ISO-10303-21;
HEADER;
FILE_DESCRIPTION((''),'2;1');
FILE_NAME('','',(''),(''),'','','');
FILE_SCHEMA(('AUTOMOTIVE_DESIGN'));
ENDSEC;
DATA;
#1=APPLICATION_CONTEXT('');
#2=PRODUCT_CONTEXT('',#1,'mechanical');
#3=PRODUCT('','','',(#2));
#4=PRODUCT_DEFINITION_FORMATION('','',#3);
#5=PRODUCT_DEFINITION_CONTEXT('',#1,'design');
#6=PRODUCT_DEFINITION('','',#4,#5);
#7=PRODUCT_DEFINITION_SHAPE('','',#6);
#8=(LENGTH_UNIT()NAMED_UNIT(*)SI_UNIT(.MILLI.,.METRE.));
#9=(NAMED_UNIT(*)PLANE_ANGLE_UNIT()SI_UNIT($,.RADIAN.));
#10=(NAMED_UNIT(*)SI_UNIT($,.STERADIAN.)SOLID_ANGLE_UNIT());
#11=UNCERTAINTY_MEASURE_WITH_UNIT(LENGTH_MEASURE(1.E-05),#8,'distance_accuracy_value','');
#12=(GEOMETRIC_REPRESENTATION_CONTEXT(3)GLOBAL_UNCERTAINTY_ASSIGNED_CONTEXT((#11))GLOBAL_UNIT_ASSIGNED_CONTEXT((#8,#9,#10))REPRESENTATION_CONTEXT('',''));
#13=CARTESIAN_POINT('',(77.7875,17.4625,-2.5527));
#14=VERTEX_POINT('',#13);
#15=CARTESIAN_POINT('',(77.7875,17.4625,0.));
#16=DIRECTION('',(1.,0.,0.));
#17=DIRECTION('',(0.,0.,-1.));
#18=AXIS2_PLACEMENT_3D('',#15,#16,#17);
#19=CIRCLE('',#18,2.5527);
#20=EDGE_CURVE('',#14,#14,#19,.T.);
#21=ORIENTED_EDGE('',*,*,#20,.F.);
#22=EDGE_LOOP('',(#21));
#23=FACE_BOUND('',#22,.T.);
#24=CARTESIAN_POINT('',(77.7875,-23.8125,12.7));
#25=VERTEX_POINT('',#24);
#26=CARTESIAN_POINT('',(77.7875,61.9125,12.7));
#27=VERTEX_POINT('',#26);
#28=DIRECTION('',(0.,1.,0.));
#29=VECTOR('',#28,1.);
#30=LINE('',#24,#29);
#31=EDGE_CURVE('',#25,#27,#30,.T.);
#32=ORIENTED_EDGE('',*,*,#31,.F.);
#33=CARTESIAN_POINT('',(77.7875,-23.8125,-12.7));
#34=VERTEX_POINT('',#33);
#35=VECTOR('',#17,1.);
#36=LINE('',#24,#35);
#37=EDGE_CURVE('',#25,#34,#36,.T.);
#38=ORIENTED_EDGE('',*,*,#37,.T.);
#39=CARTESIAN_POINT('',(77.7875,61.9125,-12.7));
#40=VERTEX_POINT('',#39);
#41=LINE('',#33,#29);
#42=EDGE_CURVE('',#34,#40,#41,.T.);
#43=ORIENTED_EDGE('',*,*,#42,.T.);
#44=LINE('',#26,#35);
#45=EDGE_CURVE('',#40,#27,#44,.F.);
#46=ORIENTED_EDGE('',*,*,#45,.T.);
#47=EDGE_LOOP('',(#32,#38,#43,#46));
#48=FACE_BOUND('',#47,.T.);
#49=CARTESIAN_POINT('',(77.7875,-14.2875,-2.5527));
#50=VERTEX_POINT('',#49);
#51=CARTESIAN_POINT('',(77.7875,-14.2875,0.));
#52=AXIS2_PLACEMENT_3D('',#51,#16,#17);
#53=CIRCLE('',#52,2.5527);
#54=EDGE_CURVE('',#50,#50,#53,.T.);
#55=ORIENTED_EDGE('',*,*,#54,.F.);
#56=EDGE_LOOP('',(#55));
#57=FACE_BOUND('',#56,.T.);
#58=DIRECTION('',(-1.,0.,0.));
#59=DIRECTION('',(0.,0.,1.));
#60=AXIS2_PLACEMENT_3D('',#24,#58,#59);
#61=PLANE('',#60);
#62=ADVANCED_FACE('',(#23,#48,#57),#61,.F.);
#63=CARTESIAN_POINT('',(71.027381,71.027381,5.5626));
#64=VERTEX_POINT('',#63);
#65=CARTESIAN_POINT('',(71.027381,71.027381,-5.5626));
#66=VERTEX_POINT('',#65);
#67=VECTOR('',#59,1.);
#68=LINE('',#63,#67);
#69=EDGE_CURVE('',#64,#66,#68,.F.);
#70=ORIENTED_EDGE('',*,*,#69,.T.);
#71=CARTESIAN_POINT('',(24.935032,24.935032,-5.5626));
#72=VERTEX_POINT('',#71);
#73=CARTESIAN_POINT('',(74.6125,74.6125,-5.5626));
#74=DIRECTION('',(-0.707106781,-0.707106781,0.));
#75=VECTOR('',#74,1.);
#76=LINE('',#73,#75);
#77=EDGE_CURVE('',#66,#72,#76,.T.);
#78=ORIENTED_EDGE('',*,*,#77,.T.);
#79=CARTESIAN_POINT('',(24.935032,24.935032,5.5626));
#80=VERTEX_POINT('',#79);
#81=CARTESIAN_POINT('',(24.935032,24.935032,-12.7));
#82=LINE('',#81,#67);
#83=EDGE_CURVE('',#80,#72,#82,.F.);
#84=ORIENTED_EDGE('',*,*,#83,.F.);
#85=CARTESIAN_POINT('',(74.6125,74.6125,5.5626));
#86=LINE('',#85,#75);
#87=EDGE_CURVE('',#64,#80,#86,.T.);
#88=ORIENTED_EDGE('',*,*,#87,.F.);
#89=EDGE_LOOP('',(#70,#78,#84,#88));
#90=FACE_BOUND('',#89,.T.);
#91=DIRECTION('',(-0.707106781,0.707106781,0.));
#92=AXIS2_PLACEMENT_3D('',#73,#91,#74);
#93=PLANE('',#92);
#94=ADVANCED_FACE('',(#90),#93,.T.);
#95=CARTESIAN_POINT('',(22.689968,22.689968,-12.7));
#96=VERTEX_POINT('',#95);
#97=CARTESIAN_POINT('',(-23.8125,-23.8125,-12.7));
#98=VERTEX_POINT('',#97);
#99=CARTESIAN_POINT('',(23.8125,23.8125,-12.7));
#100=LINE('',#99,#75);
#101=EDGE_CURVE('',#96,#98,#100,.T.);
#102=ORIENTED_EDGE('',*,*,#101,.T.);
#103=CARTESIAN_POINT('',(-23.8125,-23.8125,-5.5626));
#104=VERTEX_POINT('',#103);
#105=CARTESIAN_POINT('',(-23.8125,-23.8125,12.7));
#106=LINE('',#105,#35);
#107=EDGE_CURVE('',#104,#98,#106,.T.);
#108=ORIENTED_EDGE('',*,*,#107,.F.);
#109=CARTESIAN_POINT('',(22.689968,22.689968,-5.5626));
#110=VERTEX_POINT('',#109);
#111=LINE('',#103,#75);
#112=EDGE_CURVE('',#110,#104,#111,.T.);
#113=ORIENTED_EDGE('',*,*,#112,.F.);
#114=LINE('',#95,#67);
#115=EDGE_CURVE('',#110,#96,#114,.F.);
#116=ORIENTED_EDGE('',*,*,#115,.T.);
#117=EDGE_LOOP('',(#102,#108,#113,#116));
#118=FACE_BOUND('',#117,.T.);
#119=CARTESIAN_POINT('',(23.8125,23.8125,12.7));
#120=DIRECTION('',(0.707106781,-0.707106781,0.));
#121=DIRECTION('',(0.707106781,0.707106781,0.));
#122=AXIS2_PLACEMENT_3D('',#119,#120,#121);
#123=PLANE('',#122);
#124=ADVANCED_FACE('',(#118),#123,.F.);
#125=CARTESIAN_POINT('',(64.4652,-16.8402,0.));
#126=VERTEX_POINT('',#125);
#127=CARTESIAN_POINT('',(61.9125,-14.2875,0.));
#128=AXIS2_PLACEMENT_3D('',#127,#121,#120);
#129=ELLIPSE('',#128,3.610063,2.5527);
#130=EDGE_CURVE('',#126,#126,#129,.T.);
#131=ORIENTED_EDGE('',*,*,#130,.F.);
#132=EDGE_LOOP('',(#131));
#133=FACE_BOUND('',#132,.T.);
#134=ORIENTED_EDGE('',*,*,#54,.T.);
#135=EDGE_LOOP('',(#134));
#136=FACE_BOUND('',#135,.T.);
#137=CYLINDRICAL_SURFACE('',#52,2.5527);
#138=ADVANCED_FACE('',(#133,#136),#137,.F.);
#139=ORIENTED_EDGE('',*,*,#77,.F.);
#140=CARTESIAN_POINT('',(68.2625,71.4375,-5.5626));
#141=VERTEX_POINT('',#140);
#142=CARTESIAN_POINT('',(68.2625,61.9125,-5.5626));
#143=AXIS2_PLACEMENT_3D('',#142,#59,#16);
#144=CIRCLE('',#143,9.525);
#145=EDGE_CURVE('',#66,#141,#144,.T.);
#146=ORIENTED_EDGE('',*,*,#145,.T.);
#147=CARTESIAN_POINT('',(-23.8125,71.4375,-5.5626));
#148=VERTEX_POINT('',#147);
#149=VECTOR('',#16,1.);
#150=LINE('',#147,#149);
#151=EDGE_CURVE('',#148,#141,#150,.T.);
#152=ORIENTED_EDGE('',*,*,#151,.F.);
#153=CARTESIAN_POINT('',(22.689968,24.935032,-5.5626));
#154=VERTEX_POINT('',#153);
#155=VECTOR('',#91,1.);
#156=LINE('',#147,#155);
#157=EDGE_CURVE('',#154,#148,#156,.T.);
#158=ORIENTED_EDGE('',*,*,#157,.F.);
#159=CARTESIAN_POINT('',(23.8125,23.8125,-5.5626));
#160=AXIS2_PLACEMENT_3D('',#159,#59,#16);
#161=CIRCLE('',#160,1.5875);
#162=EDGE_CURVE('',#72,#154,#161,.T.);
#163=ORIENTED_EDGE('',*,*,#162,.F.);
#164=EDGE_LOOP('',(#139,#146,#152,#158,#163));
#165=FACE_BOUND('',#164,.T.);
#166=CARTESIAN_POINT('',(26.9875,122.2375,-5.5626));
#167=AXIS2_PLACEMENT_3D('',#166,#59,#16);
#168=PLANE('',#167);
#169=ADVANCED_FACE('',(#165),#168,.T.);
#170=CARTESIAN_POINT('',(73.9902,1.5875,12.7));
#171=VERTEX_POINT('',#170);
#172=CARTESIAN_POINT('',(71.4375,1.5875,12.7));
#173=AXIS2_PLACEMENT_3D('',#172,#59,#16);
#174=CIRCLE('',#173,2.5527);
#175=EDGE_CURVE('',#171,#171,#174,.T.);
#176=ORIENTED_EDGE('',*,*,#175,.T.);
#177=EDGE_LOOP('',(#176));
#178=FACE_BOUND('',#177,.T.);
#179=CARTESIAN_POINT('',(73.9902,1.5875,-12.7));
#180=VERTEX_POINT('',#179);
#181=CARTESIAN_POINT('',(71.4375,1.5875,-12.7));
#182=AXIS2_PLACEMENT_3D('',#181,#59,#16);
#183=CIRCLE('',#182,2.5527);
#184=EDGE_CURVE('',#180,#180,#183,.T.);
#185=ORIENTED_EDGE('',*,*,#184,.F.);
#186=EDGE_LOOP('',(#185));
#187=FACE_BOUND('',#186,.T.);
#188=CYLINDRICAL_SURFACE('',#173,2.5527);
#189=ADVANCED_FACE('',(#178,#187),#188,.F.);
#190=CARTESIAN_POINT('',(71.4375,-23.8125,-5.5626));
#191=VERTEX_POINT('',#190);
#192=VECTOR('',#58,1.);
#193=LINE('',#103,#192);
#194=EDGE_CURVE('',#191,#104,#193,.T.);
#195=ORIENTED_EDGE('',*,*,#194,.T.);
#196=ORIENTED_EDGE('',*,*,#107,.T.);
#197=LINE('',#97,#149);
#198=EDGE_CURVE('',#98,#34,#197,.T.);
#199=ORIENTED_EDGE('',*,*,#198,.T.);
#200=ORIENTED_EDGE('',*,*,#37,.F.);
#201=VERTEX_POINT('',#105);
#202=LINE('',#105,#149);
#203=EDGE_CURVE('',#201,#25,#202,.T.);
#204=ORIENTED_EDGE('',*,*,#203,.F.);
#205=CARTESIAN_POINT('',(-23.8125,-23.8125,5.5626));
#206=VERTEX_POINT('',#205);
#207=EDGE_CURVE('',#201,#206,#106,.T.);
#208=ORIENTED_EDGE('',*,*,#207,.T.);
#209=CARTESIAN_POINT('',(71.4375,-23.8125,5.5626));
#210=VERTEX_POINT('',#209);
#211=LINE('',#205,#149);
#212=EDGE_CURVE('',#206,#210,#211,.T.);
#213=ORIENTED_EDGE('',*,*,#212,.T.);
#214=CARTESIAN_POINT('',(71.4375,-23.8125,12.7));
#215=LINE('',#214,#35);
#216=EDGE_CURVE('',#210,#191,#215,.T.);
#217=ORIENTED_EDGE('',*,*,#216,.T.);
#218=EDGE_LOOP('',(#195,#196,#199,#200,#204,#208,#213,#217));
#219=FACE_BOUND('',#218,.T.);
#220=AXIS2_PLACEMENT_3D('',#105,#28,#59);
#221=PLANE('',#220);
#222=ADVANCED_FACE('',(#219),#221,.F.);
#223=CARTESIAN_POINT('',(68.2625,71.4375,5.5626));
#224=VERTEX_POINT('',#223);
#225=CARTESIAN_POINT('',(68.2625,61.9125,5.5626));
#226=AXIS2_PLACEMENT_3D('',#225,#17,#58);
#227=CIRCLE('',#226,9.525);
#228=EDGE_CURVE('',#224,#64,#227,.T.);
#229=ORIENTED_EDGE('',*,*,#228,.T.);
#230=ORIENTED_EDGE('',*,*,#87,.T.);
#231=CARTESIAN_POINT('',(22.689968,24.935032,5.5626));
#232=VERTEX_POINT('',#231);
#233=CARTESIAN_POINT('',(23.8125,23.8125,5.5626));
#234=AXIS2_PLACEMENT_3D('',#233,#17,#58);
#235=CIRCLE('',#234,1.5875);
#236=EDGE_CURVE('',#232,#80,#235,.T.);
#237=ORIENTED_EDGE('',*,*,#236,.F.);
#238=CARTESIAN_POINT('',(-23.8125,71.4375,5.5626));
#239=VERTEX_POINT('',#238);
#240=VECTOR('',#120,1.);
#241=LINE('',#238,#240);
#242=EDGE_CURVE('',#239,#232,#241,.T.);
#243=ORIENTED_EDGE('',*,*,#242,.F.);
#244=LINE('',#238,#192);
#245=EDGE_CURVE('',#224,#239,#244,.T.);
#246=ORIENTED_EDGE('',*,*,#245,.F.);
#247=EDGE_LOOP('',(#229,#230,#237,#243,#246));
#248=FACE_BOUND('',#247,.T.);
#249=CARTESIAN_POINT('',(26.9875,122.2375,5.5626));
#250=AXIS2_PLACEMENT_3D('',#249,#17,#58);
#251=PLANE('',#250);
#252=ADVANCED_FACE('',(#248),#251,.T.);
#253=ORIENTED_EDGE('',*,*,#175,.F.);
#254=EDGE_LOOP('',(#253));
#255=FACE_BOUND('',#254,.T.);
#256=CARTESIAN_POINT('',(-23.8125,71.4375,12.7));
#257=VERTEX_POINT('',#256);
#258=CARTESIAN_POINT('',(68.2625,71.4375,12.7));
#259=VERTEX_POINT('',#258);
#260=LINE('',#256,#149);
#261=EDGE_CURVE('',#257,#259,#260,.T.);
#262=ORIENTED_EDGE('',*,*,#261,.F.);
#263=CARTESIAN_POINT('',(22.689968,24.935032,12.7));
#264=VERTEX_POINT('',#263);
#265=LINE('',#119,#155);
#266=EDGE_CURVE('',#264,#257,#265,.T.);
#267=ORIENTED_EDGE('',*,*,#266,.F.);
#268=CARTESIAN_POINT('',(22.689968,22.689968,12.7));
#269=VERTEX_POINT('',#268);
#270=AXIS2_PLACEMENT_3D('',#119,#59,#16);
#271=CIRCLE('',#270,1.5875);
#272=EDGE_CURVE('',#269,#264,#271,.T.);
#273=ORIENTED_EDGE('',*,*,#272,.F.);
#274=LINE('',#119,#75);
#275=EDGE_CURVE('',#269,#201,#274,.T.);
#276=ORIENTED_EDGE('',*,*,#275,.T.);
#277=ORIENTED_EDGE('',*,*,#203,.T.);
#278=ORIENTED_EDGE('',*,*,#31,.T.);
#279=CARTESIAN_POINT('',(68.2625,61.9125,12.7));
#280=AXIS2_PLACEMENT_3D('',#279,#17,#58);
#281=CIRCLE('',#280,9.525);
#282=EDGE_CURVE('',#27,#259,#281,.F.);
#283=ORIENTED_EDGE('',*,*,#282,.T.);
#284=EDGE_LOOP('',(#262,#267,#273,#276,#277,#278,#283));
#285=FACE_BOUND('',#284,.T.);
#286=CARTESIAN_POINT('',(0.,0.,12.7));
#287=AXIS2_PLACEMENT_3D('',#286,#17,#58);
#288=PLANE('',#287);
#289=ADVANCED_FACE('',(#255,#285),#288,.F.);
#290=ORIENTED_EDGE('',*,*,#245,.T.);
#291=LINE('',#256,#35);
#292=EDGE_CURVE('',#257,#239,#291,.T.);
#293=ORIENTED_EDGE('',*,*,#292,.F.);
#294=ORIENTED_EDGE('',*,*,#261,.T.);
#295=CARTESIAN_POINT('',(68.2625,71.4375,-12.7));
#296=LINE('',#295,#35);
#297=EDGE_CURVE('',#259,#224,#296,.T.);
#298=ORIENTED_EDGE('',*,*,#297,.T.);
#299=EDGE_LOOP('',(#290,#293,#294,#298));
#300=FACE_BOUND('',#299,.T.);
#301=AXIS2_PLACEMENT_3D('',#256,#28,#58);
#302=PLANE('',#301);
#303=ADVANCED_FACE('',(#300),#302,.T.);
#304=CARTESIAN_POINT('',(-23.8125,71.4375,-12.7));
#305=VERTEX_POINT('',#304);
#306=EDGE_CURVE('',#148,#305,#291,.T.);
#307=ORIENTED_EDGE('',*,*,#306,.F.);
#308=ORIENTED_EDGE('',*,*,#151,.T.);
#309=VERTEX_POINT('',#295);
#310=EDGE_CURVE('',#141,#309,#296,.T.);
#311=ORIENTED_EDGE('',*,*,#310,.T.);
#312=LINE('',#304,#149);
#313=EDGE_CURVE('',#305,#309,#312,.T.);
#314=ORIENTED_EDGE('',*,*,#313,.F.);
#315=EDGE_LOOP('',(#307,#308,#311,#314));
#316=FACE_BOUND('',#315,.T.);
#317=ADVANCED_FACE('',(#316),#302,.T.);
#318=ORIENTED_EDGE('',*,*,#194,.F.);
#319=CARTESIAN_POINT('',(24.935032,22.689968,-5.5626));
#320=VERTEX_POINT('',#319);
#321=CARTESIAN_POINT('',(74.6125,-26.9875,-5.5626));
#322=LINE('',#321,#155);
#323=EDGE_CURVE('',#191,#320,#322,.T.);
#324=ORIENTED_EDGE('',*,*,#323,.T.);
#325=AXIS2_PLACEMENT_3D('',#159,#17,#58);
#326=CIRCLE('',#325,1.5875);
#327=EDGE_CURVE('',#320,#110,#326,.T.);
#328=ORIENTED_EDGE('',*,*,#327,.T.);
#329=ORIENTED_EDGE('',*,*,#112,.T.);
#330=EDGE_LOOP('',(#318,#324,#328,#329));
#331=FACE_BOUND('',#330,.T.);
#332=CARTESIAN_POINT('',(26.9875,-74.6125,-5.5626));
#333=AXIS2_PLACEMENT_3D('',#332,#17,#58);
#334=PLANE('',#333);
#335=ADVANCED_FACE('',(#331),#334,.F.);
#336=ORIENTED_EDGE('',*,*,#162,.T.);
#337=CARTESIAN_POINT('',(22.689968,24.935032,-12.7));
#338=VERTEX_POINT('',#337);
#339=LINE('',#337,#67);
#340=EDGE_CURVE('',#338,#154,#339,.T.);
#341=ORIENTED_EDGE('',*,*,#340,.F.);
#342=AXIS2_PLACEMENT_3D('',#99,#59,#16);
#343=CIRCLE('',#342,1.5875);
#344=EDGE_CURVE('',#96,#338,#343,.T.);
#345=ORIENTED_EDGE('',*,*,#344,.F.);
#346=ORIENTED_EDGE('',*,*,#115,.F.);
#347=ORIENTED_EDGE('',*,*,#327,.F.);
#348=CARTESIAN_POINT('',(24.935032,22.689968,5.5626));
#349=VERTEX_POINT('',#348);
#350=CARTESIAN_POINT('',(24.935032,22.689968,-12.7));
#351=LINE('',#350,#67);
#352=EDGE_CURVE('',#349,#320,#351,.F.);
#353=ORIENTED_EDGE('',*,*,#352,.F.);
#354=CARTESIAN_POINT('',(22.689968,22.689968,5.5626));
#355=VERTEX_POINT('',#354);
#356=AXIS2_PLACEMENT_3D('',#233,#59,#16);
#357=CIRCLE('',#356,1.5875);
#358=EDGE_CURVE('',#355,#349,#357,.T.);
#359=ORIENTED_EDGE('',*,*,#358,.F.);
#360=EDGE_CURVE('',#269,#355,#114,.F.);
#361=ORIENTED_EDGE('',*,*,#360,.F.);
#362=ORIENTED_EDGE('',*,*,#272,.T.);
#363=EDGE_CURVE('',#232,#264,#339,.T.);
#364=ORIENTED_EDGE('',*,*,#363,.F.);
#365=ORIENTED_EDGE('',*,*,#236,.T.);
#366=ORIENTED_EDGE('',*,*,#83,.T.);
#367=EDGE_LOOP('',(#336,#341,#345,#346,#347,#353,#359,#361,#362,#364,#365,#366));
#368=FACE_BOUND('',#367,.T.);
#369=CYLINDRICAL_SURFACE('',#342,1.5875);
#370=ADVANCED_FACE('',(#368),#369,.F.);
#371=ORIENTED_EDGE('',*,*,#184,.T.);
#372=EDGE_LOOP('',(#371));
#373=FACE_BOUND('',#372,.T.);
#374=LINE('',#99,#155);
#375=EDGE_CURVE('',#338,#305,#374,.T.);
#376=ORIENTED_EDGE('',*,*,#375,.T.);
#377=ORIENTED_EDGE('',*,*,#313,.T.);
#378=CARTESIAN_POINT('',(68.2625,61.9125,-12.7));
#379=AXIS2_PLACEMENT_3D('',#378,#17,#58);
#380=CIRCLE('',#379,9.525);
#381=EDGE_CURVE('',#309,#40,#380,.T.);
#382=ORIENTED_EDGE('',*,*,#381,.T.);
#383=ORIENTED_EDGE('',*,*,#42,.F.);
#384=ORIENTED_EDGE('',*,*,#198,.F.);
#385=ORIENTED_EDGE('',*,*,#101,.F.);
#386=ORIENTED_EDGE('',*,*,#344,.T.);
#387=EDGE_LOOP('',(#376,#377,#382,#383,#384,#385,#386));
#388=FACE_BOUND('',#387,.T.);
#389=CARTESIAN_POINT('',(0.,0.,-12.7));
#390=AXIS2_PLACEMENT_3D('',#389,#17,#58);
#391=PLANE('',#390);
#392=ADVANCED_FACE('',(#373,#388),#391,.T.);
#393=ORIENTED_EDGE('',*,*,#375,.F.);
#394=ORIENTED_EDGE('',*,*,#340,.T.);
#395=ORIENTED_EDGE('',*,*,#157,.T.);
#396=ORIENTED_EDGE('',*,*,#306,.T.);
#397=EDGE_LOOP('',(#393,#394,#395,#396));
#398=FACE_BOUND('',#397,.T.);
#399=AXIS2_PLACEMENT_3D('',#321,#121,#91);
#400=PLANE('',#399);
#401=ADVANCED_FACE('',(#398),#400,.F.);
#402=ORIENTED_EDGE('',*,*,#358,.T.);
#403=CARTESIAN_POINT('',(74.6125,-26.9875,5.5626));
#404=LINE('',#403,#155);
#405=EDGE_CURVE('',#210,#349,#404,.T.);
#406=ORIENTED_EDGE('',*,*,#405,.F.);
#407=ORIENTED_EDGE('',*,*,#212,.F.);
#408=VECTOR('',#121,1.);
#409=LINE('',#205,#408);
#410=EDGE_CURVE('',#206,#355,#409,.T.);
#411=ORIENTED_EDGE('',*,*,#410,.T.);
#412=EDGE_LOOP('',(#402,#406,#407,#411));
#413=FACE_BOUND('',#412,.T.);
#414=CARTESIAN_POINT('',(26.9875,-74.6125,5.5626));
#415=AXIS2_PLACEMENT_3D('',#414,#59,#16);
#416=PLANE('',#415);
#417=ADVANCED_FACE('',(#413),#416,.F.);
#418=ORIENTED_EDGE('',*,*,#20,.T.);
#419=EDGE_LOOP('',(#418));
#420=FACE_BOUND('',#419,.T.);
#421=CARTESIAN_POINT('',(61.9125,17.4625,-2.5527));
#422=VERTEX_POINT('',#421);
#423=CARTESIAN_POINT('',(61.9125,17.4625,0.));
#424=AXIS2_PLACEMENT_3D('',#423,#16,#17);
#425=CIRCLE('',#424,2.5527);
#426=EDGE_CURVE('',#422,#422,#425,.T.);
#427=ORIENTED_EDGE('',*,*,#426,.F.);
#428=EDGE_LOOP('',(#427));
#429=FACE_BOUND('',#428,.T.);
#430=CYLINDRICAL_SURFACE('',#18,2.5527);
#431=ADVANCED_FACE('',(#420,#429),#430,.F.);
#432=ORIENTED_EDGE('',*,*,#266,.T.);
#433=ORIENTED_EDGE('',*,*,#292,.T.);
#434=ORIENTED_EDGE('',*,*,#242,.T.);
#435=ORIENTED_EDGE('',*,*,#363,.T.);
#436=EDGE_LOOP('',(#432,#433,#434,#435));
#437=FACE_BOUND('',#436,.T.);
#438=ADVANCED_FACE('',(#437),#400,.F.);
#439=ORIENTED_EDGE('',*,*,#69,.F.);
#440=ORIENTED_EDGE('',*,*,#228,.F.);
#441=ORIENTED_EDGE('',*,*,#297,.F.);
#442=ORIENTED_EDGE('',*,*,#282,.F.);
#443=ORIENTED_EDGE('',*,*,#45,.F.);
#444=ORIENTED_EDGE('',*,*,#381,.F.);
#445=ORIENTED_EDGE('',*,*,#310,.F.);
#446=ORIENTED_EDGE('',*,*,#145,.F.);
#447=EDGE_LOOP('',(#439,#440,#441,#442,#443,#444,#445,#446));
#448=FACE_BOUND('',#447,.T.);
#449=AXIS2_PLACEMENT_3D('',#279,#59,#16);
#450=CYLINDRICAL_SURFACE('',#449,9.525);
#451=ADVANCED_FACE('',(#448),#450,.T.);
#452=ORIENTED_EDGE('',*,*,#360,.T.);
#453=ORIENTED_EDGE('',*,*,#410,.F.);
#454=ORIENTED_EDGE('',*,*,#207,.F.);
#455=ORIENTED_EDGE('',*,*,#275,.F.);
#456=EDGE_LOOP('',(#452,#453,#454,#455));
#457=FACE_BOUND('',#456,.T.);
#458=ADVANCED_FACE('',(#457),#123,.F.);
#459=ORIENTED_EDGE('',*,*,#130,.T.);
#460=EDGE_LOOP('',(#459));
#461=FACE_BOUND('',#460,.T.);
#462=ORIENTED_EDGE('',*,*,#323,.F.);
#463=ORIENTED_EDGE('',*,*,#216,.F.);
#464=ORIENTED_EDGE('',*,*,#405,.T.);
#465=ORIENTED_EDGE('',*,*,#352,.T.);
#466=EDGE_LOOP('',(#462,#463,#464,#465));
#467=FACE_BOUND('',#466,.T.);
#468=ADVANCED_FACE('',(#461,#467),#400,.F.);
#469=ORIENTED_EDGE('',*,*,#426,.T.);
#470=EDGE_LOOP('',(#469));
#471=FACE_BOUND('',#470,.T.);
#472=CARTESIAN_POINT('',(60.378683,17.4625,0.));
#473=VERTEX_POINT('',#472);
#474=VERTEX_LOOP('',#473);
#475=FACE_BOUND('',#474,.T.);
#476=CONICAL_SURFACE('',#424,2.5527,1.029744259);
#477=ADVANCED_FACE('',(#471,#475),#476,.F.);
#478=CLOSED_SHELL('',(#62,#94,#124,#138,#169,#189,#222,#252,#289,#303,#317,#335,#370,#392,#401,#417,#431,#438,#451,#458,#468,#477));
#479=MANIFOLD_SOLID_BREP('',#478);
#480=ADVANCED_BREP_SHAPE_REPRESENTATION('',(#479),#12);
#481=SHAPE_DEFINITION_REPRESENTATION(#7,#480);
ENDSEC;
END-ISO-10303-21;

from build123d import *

# Parameters (mm, degrees)
BOSS_EXTRUDE1_DEPTH         = 12.7
SKETCH2_W                   = 11.1252
SKETCH2_H                   = 67.351920908
CUT_EXTRUDE1_DEPTH          = 83.336020747
FILLET1_R                   = 9.525
SKETCH3_R                   = 1.5875
CUT_EXTRUDE2_DEPTH          = 109.624912255
F_1_4_20_TAPPED_HOLE1_D     = 5.1054
F_1_4_20_TAPPED_HOLE2_D     = 5.1054
F_1_4_20_TAPPED_HOLE2_DEPTH = 15.875
F_1_4_20_TAPPED_HOLE2_TIP   = 1.533816902
F_1_4_20_TAPPED_HOLE3_D     = 5.1054


with BuildPart() as part:
    # Sketch1 → Boss-Extrude1 (new, symmetric)
    with BuildSketch(Plane.XY):
        Polygon((-23.8125, -23.8125), (77.7875, -23.8125), (77.7875, 23.8125), (23.8125, 23.8125), align=None)
    boss_extrude1 = extrude(amount=BOSS_EXTRUDE1_DEPTH, both=True)

    # Sketch2 → Cut-Extrude1 (cut, through all)
    with BuildSketch(Plane(origin=(0, 0, 0), x_dir=(0, 0, 1), z_dir=(-0.7071067811865441, 0.707106781186551, 0))):
        Rectangle(SKETCH2_W, SKETCH2_H)
    cut_extrude1 = extrude(amount=-CUT_EXTRUDE1_DEPTH, mode=Mode.SUBTRACT)

    # Mirror1: Boss-Extrude1, Cut-Extrude1 across plane
    add(boss_extrude1.mirror(Plane(origin=(77.7875, 23.8125, 12.7), x_dir=(0, 0, 1), z_dir=(0, -1, 0))))
    add(cut_extrude1.mirror(Plane(origin=(77.7875, 23.8125, 12.7), x_dir=(0, 0, 1), z_dir=(0, -1, 0))), mode=Mode.SUBTRACT)

    # Fillet1
    # the kernel refuses this fillet: 9.525 mm, written as the material it takes off along each edge
    with BuildSketch(Plane(origin=(77.7875, 71.4375, -36.5125), x_dir=(0, -1, 0), z_dir=(0, 0, 1))) as fillet1_piece_1:
        with BuildLine():
            CenterArc((FILLET1_R, -FILLET1_R), FILLET1_R, 90, 90)
            Line((0, -FILLET1_R), (0, 0))
            Line((0, 0), (FILLET1_R, 0))
        make_face()
    extrude(amount=73.025, mode=Mode.SUBTRACT)

    # Sketch3 → Cut-Extrude2 (cut, through all)
    with BuildSketch(Plane.XY.offset(12.7)):
        with Locations((23.8125, 23.8125)):
            Circle(SKETCH3_R)
    extrude(amount=-CUT_EXTRUDE2_DEPTH, mode=Mode.SUBTRACT)

    # 1/4-20 Tapped Hole1 (through all)
    with Locations(Plane.XY.offset(12.7)):
        with Locations((71.4375, 1.5875)):
            Hole(F_1_4_20_TAPPED_HOLE1_D / 2)

    # 1/4-20 Tapped Hole2
    with Locations(Plane(origin=(77.7875, 0, 0), x_dir=(0, 0, -1), z_dir=(1, 0, 0))):
        with Locations((0, 17.4625)):
            Hole(F_1_4_20_TAPPED_HOLE2_D / 2, depth=F_1_4_20_TAPPED_HOLE2_DEPTH)
            with Locations((0, 0, -(F_1_4_20_TAPPED_HOLE2_DEPTH + F_1_4_20_TAPPED_HOLE2_TIP / 2))):  # 118° drill point
                Cone(0, F_1_4_20_TAPPED_HOLE2_D / 2, F_1_4_20_TAPPED_HOLE2_TIP, mode=Mode.SUBTRACT)

    # 1/4-20 Tapped Hole3 (through all)
    with Locations(Plane(origin=(77.7875, 0, 0), x_dir=(0, 0, -1), z_dir=(1, 0, 0))):
        with Locations((0, -14.2875)):
            Hole(F_1_4_20_TAPPED_HOLE3_D / 2)


solid = part.part
